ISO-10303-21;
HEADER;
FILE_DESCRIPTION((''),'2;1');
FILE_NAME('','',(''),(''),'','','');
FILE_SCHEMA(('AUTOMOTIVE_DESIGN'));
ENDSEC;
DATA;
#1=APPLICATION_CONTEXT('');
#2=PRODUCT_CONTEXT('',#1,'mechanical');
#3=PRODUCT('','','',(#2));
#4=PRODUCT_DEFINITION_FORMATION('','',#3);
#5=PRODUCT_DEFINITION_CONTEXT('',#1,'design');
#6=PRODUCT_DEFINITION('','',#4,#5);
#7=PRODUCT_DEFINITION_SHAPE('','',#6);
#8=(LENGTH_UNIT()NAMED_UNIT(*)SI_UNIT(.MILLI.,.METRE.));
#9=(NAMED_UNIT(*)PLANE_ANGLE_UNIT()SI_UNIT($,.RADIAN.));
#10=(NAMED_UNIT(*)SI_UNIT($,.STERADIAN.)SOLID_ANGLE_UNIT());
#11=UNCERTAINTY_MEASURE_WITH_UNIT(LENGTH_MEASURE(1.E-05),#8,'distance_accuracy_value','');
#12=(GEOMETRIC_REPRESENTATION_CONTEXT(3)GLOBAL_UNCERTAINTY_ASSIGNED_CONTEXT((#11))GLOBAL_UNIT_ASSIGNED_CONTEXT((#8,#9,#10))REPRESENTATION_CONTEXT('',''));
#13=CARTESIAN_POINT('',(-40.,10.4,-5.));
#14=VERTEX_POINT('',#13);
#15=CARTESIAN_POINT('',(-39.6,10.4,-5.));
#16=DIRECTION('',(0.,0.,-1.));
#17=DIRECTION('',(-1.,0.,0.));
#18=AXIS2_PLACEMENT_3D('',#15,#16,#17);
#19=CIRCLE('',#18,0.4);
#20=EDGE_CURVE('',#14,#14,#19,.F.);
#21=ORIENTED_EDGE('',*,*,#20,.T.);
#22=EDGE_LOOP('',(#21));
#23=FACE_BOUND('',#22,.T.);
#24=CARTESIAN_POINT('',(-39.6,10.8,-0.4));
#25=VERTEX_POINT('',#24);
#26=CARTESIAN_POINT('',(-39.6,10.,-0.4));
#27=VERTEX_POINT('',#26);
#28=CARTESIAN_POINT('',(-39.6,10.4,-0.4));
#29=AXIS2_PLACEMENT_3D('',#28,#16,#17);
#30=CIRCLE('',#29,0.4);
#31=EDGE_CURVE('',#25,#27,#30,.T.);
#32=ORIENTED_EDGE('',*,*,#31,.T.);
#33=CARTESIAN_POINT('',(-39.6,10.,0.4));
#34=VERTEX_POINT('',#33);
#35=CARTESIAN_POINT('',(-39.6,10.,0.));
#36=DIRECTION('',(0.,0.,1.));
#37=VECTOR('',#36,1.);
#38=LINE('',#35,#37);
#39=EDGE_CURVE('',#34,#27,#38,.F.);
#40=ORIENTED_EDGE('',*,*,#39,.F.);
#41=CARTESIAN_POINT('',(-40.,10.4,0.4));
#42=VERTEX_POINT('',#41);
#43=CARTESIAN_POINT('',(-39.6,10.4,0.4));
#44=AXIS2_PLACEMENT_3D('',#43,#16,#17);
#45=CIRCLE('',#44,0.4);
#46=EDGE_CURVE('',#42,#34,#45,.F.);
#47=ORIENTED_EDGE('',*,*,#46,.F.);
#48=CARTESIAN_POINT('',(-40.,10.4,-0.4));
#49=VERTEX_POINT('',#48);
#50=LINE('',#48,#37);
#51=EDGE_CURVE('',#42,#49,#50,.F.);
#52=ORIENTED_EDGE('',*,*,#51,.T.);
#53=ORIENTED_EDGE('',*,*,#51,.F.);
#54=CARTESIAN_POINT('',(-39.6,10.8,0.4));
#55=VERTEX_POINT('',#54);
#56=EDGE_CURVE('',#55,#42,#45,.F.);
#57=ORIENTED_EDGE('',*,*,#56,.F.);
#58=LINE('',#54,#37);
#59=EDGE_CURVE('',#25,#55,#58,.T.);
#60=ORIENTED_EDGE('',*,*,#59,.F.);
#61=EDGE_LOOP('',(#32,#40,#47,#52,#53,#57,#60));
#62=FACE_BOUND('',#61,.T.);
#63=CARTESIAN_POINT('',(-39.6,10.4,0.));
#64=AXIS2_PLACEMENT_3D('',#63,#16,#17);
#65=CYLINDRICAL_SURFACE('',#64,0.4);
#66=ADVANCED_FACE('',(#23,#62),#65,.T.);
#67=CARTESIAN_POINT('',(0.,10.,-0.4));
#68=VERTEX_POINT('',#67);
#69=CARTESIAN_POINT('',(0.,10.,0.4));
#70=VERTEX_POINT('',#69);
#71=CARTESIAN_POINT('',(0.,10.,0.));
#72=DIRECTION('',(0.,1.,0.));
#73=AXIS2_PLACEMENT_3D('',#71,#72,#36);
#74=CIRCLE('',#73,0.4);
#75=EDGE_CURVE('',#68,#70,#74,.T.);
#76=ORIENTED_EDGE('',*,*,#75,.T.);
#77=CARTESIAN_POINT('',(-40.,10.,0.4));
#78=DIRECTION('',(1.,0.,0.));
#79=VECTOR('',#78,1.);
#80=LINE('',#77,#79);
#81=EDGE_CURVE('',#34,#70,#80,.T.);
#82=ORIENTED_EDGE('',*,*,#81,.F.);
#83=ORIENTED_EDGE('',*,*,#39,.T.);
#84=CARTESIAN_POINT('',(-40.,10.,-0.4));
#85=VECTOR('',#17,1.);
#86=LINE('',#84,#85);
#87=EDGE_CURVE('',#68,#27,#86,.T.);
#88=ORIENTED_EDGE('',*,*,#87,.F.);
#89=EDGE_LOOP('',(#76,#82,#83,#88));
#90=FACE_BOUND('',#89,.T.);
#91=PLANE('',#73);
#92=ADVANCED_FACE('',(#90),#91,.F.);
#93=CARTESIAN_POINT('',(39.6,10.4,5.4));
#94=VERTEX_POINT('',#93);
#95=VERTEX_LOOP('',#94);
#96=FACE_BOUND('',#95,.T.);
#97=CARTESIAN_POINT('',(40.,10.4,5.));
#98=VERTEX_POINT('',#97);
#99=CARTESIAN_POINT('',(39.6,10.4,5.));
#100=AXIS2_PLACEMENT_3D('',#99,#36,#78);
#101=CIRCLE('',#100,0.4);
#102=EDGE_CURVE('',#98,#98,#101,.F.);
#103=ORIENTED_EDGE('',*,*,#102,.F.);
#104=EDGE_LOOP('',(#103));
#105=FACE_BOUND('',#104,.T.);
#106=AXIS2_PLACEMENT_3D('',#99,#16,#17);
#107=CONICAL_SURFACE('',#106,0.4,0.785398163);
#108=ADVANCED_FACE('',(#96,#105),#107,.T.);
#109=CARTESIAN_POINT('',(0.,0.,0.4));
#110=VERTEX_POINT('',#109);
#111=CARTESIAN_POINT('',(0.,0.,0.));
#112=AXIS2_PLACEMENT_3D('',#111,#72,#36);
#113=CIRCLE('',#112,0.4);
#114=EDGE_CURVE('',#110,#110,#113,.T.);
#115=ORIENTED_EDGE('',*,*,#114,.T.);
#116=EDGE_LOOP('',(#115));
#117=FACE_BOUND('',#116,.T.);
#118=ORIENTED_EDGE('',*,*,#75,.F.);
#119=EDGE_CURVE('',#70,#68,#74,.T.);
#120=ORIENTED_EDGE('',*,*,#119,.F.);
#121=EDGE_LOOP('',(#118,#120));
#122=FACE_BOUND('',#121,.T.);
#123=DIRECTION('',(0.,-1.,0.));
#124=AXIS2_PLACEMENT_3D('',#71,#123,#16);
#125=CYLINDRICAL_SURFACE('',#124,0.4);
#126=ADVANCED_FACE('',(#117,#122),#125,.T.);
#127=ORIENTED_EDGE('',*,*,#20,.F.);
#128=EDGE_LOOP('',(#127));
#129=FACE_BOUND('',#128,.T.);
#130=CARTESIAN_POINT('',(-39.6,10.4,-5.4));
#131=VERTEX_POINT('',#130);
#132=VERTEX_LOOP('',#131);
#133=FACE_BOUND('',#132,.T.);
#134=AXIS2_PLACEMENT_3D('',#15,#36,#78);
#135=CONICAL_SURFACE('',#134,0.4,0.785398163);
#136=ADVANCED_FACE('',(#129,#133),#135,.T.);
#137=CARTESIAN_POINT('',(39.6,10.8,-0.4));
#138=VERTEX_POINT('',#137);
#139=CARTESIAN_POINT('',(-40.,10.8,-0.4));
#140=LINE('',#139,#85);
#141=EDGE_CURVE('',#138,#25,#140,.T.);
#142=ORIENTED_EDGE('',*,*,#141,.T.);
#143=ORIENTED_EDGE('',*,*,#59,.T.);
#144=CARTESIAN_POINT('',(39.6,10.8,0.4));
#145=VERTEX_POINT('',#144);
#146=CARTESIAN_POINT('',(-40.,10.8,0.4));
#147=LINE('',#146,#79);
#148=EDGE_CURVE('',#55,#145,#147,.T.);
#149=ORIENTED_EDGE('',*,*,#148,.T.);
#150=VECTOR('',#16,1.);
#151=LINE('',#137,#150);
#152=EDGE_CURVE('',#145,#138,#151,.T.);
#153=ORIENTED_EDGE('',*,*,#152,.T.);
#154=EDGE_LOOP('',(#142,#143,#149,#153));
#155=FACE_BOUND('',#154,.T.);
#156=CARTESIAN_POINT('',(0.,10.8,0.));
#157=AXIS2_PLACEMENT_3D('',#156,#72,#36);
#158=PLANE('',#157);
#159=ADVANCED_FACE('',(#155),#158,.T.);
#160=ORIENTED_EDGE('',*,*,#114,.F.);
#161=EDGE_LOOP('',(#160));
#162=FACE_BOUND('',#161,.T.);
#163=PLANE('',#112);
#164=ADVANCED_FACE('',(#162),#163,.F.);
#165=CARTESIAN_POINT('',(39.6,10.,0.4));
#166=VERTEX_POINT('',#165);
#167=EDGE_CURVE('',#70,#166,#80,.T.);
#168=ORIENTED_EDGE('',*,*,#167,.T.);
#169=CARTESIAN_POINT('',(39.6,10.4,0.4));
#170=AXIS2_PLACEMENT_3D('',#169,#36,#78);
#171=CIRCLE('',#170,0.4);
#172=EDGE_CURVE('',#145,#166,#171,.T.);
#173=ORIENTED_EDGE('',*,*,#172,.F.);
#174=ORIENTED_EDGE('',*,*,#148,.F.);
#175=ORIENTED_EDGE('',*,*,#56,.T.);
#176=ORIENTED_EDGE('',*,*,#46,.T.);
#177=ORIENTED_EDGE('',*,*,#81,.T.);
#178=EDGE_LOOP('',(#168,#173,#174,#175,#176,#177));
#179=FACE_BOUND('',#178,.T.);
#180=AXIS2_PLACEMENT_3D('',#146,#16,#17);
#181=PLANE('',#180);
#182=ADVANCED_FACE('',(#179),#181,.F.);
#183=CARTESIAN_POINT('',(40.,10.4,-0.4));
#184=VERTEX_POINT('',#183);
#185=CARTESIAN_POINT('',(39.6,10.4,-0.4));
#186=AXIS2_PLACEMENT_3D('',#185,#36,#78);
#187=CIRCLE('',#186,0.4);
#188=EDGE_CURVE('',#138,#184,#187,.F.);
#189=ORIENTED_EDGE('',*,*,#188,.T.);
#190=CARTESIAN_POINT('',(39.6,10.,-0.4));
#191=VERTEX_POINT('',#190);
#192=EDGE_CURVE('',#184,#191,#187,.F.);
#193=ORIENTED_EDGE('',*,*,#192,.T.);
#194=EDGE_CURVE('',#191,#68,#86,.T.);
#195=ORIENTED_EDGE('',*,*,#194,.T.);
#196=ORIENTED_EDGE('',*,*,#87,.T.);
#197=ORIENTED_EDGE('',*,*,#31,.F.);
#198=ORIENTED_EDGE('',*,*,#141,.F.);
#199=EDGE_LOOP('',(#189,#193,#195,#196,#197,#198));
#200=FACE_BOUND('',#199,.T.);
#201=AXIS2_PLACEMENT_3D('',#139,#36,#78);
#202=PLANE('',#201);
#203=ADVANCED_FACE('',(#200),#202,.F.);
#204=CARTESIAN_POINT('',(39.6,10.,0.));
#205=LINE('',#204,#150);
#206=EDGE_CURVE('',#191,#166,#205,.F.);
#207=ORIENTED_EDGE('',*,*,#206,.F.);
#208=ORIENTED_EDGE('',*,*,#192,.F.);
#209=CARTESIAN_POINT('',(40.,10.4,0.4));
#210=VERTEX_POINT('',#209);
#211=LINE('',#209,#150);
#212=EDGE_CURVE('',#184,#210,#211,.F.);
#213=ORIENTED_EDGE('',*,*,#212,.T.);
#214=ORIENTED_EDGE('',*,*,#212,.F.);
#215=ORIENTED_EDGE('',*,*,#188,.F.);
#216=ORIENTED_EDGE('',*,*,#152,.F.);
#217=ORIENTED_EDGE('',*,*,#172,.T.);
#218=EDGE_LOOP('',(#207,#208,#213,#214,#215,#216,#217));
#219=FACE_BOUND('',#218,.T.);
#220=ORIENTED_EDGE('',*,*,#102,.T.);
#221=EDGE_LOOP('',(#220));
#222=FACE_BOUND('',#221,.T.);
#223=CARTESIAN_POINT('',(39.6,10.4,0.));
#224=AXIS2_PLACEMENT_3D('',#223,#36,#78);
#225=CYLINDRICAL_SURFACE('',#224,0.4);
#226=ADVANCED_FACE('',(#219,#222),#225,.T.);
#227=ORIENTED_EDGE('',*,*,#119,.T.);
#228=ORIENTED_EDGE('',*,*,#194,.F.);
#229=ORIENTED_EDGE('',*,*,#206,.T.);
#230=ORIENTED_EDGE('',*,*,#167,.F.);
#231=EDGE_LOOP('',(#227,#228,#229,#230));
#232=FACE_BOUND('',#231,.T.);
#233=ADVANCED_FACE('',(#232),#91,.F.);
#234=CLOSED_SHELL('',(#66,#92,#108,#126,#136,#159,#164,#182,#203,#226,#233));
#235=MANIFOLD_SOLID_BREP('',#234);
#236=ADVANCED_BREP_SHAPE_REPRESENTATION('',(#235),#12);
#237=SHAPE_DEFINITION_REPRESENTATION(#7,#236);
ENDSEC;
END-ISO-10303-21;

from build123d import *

# Parameters (mm, degrees)
SKETCH_1_R      = 0.4
EXTRUDE_1_DEPTH = 10
SKETCH_2_W      = 80
SKETCH_2_H      = 0.8
EXTRUDE_2_DEPTH = 0.8
FILLET_1_R      = 0.4
SKETCH_3_R      = 0.4
EXTRUDE_3_DEPTH = 5
SKETCH_4_R      = 0.4
EXTRUDE_4_DEPTH = 5
CHAMFER_1_SIZE  = 0.4


with BuildPart() as part:
    # 草图1 → 凸台-拉伸1 (new body)
    with BuildSketch(Plane(origin=(0, 0, 0), x_dir=(1, 0, 0), z_dir=(0, 1, 0))):
        with Locations(Location((0, 0, 0), (0, 0, 270))):
            Circle(SKETCH_1_R)
    extrude(amount=EXTRUDE_1_DEPTH)

    # 草图2 → 凸台-拉伸2 (add)
    with BuildSketch(Plane(origin=(0, 10, 0), x_dir=(1, 0, 0), z_dir=(0, 1, 0))):
        Rectangle(SKETCH_2_W, SKETCH_2_H)
    extrude(amount=EXTRUDE_2_DEPTH)

    # 圆角1
    fillet_1_edges = [part.edges().sort_by_distance(p)[0] for p in [
        (40, 10, 0),
        (40, 10.8, 0),
        (-40, 10, 0),
        (-40, 10.8, 0),
    ]]
    fillet(fillet_1_edges, radius=FILLET_1_R - 0.0001)  # a hair under: the kernel refuses the full size

    # 草图3 → 凸台-拉伸3 (add)
    with BuildSketch(Plane.XY.offset(0.4)):
        with Locations((39.6, 10.4)):
            Circle(SKETCH_3_R)
    extrude(amount=EXTRUDE_3_DEPTH)

    # 草图4 → 凸台-拉伸4 (add)
    with BuildSketch(Plane(origin=(0, 0, -0.4), x_dir=(-1, 0, 0), z_dir=(0, 0, -1))):
        with Locations((39.6, 10.4)):
            Circle(SKETCH_4_R)
    extrude(amount=EXTRUDE_4_DEPTH)

    # 倒角1
    chamfer_1_edges = [part.edges().sort_by_distance(p)[0] for p in [
        (39.2, 10.4, 5.4),
        (-39.2, 10.4, -5.4),
    ]]
    chamfer(chamfer_1_edges, length=CHAMFER_1_SIZE - 0.0001)  # a hair under: the kernel refuses the full size


solid = part.part
